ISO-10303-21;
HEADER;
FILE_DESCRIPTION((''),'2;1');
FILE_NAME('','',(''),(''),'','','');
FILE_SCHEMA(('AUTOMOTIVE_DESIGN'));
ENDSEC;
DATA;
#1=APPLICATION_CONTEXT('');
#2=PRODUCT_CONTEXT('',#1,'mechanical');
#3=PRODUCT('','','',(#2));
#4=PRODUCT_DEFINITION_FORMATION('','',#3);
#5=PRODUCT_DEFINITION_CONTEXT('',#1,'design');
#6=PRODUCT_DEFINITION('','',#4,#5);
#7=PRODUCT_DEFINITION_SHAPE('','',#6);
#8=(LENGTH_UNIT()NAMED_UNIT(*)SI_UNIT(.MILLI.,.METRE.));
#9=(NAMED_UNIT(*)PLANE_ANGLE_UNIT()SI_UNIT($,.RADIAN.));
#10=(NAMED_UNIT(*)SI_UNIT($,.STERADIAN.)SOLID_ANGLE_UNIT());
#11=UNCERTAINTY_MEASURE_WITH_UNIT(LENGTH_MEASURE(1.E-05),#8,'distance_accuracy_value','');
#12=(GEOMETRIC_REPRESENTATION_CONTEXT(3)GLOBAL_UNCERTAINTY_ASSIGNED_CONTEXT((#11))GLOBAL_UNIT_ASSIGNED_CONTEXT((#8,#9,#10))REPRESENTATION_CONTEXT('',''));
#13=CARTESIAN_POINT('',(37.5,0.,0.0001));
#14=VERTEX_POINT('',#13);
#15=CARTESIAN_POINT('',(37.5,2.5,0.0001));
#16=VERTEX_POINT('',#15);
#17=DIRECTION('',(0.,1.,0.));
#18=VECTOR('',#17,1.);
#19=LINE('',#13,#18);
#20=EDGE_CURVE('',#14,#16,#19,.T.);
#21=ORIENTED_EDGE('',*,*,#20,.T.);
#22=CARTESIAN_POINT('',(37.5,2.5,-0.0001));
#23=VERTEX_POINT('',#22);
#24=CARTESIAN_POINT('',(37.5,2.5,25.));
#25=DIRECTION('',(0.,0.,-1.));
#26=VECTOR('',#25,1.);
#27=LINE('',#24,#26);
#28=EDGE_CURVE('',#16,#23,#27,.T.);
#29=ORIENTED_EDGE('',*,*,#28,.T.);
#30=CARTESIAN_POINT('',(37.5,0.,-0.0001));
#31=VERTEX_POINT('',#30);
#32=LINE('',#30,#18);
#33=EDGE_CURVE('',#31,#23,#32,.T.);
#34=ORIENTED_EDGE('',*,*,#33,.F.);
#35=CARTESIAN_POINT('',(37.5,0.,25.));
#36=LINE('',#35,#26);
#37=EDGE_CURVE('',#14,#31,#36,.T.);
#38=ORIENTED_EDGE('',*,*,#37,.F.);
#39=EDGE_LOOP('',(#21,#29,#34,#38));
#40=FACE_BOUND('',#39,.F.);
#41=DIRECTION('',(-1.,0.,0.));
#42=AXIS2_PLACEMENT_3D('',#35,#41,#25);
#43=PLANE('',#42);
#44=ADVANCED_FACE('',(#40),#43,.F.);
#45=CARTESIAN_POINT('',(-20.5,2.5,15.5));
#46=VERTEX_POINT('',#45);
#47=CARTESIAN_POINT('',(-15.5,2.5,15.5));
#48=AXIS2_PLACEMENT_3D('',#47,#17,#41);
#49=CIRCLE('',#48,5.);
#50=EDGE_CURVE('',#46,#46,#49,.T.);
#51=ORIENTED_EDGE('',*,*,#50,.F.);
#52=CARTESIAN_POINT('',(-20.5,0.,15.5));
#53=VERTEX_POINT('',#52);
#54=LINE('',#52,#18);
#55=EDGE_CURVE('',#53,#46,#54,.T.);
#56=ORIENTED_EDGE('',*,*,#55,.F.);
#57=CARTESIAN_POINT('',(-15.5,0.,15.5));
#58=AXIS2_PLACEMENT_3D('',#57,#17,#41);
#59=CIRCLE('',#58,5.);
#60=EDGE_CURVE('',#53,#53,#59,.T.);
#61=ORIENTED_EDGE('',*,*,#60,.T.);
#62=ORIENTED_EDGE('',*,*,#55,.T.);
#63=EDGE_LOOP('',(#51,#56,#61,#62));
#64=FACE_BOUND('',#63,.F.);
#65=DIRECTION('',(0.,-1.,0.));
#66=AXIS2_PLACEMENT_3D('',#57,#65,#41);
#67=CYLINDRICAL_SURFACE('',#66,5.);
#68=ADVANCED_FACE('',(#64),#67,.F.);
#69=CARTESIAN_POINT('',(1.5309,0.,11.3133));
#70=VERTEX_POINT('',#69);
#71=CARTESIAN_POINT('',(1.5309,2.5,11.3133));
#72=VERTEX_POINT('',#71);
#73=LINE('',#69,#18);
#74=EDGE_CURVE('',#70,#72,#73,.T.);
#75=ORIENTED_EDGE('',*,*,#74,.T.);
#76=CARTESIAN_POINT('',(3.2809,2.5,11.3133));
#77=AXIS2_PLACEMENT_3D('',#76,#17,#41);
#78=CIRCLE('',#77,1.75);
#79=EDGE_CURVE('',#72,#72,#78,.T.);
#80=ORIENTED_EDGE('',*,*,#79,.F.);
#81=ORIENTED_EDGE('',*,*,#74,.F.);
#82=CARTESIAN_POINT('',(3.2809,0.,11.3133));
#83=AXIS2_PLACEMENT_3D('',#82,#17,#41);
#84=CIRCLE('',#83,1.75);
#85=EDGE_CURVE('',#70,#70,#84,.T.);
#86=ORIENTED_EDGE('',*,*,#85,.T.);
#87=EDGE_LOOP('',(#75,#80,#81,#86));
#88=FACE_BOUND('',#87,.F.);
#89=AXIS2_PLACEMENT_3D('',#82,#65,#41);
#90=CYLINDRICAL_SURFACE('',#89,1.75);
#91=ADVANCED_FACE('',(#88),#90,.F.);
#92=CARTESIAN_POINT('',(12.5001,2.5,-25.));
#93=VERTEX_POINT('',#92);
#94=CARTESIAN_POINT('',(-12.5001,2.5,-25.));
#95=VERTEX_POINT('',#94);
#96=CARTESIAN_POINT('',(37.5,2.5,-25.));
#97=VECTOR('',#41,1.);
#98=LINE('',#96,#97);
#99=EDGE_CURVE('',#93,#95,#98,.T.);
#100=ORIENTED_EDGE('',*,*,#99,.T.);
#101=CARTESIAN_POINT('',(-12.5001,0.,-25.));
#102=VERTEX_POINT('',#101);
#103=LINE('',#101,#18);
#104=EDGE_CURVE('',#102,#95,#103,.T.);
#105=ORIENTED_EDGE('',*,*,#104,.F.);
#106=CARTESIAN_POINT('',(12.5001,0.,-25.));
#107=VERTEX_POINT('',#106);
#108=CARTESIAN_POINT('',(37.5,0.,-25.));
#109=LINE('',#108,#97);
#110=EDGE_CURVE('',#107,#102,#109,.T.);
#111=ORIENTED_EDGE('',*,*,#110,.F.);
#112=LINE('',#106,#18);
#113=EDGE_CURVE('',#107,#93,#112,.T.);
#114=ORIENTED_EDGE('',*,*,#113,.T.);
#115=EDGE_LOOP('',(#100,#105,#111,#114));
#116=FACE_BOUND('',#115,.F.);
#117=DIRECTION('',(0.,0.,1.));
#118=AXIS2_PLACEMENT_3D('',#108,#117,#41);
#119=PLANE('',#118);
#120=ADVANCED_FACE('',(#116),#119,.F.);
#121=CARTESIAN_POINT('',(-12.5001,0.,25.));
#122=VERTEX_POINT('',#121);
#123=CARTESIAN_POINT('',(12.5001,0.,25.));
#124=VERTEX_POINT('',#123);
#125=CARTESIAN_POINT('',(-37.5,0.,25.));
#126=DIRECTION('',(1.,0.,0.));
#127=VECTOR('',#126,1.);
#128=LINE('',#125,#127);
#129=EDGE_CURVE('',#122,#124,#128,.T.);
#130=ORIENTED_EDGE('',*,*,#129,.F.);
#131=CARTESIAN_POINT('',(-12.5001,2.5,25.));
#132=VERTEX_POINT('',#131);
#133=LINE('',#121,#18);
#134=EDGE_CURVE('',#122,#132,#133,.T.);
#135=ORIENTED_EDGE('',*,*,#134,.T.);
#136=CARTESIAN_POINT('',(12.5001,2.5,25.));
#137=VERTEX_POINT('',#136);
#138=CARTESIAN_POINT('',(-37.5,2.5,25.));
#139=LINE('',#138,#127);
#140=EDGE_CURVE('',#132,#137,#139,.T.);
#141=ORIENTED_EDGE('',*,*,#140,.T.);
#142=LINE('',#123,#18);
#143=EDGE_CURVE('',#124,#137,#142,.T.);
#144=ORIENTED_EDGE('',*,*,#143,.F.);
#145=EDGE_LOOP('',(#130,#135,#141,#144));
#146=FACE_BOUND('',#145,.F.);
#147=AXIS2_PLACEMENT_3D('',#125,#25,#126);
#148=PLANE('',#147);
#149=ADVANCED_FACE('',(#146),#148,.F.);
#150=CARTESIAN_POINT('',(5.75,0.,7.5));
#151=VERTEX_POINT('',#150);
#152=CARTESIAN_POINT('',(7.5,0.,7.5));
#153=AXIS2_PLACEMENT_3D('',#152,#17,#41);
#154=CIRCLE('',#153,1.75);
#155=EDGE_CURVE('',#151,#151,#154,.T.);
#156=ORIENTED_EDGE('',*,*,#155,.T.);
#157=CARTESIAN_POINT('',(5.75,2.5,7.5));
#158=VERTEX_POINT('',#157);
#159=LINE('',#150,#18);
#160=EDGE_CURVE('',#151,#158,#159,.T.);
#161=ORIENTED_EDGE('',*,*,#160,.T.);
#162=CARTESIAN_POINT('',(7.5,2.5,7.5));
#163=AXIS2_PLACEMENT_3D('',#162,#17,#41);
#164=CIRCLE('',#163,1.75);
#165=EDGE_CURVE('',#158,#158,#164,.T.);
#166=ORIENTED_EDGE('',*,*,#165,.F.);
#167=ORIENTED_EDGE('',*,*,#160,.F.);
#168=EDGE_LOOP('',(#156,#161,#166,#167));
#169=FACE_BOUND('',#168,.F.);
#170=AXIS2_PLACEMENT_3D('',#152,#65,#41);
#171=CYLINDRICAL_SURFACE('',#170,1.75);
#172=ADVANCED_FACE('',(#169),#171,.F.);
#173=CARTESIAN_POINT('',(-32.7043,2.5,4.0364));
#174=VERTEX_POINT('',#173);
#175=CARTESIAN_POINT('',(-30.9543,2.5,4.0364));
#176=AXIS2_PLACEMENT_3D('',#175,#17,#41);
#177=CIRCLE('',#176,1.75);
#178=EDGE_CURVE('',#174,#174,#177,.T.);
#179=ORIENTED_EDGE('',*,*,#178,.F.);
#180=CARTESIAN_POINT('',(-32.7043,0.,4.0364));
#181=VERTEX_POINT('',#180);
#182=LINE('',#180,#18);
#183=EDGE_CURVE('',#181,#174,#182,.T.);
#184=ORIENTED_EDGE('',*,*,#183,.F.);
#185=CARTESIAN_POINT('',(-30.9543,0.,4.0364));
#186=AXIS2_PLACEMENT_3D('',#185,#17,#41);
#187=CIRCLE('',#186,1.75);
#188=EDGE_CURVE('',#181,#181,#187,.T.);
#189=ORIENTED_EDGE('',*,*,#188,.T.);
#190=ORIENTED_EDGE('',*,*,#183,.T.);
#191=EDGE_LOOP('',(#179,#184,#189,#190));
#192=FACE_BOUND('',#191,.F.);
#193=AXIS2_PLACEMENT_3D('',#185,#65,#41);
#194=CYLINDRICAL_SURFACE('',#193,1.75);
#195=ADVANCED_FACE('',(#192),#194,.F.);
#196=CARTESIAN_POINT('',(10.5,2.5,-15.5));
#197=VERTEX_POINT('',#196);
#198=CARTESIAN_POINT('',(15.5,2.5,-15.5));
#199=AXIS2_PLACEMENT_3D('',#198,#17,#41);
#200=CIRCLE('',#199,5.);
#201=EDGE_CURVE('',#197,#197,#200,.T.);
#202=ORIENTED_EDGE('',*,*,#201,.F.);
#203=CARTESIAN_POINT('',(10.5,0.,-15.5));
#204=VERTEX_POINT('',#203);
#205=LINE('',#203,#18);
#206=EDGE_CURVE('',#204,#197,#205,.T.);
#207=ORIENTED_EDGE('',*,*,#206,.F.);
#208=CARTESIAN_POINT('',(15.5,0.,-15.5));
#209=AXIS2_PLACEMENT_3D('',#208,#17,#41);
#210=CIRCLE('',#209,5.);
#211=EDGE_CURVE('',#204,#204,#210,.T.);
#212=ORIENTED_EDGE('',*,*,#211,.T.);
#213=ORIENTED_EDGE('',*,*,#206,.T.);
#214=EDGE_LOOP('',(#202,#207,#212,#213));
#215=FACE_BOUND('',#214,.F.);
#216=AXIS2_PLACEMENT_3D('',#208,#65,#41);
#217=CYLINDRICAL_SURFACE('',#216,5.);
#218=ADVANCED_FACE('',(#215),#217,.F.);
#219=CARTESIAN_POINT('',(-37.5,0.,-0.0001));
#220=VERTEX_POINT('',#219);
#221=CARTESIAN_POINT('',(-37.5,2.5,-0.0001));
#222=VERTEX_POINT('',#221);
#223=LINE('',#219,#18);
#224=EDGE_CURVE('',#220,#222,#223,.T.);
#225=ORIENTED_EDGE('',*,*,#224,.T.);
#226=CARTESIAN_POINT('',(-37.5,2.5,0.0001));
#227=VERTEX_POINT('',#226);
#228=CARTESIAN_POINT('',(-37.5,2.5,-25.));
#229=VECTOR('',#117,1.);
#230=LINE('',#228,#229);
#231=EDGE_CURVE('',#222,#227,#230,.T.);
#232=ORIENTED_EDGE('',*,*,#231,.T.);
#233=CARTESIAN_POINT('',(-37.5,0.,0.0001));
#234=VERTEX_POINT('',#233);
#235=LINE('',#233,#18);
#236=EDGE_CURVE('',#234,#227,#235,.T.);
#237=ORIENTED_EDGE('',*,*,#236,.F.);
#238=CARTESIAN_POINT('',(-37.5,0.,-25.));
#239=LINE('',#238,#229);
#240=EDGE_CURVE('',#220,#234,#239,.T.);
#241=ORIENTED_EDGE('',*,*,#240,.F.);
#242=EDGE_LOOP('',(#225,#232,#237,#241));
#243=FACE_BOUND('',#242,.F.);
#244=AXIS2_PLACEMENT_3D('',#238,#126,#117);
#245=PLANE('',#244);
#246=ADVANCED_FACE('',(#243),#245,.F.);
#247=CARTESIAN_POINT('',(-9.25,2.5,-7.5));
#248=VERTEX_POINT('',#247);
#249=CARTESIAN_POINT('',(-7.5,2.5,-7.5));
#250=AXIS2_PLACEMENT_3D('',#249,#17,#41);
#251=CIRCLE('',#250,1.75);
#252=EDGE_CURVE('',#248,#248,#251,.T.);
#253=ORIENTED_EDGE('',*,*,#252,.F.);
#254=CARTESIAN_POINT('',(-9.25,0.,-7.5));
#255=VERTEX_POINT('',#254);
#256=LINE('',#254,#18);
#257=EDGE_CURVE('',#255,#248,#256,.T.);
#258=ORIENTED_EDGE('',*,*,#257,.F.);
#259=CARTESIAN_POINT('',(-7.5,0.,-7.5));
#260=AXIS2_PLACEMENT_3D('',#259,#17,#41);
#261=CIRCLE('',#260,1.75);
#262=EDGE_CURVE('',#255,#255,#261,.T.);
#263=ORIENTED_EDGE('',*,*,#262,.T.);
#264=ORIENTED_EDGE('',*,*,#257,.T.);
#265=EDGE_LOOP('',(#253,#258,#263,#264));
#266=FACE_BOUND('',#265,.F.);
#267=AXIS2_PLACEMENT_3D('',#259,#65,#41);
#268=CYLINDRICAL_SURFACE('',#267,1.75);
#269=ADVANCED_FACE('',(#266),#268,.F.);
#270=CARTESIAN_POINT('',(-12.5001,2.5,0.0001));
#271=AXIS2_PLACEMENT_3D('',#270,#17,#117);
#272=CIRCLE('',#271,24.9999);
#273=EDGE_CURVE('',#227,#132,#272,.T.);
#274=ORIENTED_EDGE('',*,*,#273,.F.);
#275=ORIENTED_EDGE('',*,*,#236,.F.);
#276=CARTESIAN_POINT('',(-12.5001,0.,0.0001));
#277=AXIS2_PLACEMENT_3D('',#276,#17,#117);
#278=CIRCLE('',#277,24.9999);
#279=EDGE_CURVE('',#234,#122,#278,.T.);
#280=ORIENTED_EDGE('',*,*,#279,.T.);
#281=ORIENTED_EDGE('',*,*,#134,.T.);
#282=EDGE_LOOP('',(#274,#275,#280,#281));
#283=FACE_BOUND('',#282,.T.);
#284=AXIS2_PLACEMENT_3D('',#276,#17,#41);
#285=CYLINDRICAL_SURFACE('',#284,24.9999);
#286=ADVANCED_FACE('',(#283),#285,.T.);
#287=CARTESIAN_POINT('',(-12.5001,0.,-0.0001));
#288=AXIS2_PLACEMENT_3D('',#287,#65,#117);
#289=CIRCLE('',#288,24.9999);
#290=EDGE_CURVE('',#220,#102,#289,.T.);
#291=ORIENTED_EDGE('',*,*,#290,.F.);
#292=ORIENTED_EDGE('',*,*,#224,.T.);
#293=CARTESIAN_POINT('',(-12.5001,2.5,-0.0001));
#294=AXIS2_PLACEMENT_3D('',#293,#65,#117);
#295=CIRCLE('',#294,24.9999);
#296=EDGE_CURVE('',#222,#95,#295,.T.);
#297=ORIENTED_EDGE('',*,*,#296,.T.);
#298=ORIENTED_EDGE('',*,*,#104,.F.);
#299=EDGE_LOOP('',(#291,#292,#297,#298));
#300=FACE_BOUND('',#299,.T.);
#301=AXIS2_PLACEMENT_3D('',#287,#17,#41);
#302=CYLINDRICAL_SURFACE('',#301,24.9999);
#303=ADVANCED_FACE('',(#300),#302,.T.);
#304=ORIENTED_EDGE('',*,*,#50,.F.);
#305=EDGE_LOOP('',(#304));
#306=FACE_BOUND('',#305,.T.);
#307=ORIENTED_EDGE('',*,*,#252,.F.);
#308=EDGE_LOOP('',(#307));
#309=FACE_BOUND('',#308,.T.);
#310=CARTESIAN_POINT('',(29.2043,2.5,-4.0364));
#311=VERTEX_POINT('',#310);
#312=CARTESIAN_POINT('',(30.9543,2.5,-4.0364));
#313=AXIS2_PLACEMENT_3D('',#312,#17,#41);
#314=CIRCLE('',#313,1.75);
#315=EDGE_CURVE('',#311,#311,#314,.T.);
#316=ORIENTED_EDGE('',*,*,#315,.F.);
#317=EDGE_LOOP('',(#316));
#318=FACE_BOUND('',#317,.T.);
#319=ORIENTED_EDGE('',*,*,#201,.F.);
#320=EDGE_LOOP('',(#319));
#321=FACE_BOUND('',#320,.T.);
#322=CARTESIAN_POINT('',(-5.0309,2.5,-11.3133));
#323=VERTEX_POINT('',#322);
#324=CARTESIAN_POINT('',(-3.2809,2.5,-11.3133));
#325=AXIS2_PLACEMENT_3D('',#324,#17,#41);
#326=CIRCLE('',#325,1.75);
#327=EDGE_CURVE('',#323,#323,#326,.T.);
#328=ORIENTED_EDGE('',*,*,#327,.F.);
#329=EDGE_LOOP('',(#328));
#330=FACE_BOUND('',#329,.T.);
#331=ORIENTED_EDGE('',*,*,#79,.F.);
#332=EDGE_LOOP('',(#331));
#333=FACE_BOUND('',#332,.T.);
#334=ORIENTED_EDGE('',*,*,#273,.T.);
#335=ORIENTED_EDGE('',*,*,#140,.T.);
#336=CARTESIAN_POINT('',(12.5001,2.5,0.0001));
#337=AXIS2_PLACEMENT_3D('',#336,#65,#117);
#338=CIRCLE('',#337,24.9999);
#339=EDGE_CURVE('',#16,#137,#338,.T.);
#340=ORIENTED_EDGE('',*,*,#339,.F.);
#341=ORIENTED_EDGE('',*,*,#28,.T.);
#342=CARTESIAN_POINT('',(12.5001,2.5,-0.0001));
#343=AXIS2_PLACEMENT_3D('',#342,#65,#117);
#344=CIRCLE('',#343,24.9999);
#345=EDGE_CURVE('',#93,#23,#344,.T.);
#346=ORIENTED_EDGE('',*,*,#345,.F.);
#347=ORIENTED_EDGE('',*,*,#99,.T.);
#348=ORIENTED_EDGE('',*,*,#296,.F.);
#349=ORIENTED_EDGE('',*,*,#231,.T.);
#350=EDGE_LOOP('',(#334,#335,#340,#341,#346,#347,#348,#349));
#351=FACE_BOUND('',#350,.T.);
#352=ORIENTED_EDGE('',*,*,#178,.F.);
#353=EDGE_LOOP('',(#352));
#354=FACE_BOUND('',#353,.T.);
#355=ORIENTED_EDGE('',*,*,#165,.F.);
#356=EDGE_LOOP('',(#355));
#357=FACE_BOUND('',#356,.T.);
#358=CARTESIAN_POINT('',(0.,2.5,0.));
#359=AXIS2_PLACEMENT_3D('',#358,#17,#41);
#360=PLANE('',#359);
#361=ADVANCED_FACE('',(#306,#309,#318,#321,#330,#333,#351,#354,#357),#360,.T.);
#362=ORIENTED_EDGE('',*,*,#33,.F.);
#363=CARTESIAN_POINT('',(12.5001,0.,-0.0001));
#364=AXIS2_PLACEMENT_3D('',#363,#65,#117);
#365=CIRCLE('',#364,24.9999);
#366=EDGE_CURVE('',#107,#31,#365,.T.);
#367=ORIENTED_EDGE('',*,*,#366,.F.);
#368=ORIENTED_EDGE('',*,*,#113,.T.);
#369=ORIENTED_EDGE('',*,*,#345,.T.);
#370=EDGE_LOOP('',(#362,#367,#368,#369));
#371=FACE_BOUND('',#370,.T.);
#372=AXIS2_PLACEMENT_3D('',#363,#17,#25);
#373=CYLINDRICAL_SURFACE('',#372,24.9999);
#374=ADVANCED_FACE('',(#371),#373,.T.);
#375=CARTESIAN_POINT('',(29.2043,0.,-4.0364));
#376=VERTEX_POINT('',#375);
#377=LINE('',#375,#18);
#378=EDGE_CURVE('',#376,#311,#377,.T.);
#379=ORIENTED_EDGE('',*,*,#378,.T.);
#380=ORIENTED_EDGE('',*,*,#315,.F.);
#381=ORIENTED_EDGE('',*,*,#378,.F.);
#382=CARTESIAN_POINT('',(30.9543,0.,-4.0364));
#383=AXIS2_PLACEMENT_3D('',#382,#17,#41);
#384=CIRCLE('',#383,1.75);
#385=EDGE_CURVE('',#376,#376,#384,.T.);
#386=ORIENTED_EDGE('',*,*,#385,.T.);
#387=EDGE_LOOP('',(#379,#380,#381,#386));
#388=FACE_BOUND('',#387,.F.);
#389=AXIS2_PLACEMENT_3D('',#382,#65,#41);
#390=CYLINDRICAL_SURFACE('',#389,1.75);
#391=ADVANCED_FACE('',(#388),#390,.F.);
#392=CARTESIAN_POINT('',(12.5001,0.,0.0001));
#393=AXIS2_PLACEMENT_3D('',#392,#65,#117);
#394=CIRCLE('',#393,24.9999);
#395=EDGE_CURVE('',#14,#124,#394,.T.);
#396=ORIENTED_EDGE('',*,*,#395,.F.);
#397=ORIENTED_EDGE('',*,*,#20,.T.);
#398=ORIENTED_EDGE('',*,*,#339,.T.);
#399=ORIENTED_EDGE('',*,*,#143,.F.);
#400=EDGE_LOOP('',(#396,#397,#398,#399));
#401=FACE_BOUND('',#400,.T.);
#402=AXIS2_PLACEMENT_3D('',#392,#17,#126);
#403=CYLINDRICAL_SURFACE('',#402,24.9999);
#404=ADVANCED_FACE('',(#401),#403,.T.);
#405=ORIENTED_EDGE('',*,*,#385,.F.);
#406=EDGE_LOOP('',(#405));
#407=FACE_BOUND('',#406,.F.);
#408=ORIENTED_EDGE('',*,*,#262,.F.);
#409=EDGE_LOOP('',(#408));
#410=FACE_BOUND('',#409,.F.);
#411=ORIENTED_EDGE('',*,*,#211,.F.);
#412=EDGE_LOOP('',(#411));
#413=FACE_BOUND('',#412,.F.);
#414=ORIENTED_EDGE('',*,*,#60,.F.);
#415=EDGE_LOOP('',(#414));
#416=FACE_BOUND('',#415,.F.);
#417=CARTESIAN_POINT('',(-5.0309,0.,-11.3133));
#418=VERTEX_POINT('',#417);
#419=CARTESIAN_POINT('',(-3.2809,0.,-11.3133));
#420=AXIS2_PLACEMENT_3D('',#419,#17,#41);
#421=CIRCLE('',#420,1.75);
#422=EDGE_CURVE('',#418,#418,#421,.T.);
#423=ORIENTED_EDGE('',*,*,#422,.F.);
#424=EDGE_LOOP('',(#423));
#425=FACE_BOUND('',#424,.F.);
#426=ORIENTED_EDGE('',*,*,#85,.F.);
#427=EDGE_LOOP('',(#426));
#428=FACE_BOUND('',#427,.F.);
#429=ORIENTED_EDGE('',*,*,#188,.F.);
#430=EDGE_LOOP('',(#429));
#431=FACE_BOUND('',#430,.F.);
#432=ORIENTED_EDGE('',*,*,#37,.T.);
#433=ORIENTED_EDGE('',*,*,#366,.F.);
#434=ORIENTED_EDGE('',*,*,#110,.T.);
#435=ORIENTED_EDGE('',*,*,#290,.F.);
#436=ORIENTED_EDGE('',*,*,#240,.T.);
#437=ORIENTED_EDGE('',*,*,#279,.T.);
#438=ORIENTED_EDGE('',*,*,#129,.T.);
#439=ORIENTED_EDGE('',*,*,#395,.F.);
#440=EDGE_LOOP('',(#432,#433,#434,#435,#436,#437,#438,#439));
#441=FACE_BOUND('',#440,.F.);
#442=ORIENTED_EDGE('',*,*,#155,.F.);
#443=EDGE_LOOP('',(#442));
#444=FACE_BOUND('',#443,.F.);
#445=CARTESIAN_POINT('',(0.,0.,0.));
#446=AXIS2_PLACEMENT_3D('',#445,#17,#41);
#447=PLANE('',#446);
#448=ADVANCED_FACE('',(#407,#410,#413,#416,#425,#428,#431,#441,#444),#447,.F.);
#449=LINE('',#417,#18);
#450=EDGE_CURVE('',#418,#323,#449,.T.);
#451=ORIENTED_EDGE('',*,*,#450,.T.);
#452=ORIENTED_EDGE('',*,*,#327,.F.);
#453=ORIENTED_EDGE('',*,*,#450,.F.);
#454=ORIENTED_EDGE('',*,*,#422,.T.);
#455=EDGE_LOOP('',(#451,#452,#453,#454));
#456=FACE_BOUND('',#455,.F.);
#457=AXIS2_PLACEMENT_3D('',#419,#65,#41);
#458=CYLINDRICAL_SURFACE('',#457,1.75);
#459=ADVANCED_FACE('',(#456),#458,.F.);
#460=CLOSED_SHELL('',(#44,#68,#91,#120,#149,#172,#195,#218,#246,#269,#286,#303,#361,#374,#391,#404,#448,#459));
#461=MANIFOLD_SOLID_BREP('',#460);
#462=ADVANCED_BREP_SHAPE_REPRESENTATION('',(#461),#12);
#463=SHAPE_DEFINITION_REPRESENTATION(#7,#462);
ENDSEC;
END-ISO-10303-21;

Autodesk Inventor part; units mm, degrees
ref_plane "YZ Plane" through (0, 0, 0) normal (1, 0, 0) x (0, 1, 0)
ref_plane "XZ Plane" through (0, 0, 0) normal (0, 1, 0) x (-1, 0, 0)
ref_plane "XY Plane" through (0, 0, 0) normal (0, 0, 1) x (1, 0, 0)
sketch "Sketch1" plane through (0, 0, 0) normal (0, 1, 0) x (-1, 0, 0)
  line L0 (37.5, 25) -> (-37.5, 25)
  line L1 (-37.5, 25) -> (-37.5, -25)
  line L2 (-37.5, -25) -> (37.5, -25)
  line L3 (37.5, -25) -> (37.5, 25)
  circle A0 centre (-7.5, 7.5) radius 1.75
  circle A1 centre (7.5, -7.5) radius 1.75
  line L4 (-7.5, 7.5) -> (7.5, -7.5) construction
  circle A2 centre (15.5, 15.5) radius 5
  line L5 (15.5, 15.5) -> (-15.5, -15.5) construction
  circle A3 centre (-15.5, -15.5) radius 5
  line L6 (15.5, 15.5) -> (13.8367, 7.6748) construction
  line L7 (30.9543, 4.0364) -> (-3.2809, 11.3133) construction
  circle A4 centre (13.8367, 7.6748) radius 14 construction
  line L8 (18.715, -5.4478) -> (4.0428, -2.3291) construction
  line L9 (4.0428, -2.3291) -> (2.9037, -7.6878) construction
  line L10 (2.9037, -7.6878) -> (17.5759, -10.8065) construction
  line L11 (17.5759, -10.8065) -> (18.715, -5.4478) construction
  circle A5 centre (-3.2809, 11.3133) radius 1.75
  circle A6 centre (30.9543, 4.0364) radius 1.75
  line L12 (3.2809, -11.3133) -> (-30.9543, -4.0364) construction
  line L13 (-13.8367, -7.6748) -> (-15.5, -15.5) construction
  circle A7 centre (3.2809, -11.3133) radius 1.75
  circle A8 centre (-30.9543, -4.0364) radius 1.75
  circle A9 centre (-13.8367, -7.6748) radius 14 construction
  line L14 (-4.0428, 2.3291) -> (-18.715, 5.4478) construction
  line L15 (-18.715, 5.4478) -> (-17.5759, 10.8065) construction
  line L16 (-17.5759, 10.8065) -> (-2.9037, 7.6878) construction
  line L17 (-2.9037, 7.6878) -> (-4.0428, 2.3291) construction
  point P0 (0, 0)
  point P1 (0, 0)
  point P2 (0, 25)
  point P3 (-37.5, 0)
  dimension "d0" = 7.5
  dimension "d1" = 7.5
  dimension "d4" = 3.5
  dimension "d6" = 10
  dimension "d7" = 15.5
  dimension "d8" = 15.5
  dimension "d9" = 8
  dimension "d10" = 35
  dimension "d11" = 28
  dimension "d12" = 3.3
  dimension "d13" = 15
  dimension "d14" = 12
  dimension "d15" = 75
  dimension "d16" = 50
extrude "Extrusion1" add sketch "Sketch1" along normal blind 2.5
fillet "Fillet1" radius 25 4 edges at (-37.5, 1.25, 25) (37.5, 1.25, 25) (37.5, 1.25, -25) (-37.5, 1.25, -25)
equation "\"d1\" = d0"
equation "\"d8\" = d7"
equation "\"thumbscrew_dia\" = 15.8"
equation "\"helix_length\" = 3.5"
equation "\"helix_width\" = 2"
equation "\"helix_fillet\" = 0.3"
equation "\"helix_inner_dia\" = 19"
equation "\"helix_outer_dia\" = 23"
equation "\"elephant_prevention_radius\" = 0.3"
equation "\"gear_center_distance\" = 25"
equation "\"stepper_screw_dist\" = 35"
equation "\"stepper_axis_offset\" = 8"
equation "\"mount_screw_ortho_dist\" = 31"
equation "\"stepper_dia\" = 28"
equation "\"sheet_thick\" = 2.5"
equation "\"helix_winding_factor\" = 1.2"
properties part number "mount-plate_3DPrint"
